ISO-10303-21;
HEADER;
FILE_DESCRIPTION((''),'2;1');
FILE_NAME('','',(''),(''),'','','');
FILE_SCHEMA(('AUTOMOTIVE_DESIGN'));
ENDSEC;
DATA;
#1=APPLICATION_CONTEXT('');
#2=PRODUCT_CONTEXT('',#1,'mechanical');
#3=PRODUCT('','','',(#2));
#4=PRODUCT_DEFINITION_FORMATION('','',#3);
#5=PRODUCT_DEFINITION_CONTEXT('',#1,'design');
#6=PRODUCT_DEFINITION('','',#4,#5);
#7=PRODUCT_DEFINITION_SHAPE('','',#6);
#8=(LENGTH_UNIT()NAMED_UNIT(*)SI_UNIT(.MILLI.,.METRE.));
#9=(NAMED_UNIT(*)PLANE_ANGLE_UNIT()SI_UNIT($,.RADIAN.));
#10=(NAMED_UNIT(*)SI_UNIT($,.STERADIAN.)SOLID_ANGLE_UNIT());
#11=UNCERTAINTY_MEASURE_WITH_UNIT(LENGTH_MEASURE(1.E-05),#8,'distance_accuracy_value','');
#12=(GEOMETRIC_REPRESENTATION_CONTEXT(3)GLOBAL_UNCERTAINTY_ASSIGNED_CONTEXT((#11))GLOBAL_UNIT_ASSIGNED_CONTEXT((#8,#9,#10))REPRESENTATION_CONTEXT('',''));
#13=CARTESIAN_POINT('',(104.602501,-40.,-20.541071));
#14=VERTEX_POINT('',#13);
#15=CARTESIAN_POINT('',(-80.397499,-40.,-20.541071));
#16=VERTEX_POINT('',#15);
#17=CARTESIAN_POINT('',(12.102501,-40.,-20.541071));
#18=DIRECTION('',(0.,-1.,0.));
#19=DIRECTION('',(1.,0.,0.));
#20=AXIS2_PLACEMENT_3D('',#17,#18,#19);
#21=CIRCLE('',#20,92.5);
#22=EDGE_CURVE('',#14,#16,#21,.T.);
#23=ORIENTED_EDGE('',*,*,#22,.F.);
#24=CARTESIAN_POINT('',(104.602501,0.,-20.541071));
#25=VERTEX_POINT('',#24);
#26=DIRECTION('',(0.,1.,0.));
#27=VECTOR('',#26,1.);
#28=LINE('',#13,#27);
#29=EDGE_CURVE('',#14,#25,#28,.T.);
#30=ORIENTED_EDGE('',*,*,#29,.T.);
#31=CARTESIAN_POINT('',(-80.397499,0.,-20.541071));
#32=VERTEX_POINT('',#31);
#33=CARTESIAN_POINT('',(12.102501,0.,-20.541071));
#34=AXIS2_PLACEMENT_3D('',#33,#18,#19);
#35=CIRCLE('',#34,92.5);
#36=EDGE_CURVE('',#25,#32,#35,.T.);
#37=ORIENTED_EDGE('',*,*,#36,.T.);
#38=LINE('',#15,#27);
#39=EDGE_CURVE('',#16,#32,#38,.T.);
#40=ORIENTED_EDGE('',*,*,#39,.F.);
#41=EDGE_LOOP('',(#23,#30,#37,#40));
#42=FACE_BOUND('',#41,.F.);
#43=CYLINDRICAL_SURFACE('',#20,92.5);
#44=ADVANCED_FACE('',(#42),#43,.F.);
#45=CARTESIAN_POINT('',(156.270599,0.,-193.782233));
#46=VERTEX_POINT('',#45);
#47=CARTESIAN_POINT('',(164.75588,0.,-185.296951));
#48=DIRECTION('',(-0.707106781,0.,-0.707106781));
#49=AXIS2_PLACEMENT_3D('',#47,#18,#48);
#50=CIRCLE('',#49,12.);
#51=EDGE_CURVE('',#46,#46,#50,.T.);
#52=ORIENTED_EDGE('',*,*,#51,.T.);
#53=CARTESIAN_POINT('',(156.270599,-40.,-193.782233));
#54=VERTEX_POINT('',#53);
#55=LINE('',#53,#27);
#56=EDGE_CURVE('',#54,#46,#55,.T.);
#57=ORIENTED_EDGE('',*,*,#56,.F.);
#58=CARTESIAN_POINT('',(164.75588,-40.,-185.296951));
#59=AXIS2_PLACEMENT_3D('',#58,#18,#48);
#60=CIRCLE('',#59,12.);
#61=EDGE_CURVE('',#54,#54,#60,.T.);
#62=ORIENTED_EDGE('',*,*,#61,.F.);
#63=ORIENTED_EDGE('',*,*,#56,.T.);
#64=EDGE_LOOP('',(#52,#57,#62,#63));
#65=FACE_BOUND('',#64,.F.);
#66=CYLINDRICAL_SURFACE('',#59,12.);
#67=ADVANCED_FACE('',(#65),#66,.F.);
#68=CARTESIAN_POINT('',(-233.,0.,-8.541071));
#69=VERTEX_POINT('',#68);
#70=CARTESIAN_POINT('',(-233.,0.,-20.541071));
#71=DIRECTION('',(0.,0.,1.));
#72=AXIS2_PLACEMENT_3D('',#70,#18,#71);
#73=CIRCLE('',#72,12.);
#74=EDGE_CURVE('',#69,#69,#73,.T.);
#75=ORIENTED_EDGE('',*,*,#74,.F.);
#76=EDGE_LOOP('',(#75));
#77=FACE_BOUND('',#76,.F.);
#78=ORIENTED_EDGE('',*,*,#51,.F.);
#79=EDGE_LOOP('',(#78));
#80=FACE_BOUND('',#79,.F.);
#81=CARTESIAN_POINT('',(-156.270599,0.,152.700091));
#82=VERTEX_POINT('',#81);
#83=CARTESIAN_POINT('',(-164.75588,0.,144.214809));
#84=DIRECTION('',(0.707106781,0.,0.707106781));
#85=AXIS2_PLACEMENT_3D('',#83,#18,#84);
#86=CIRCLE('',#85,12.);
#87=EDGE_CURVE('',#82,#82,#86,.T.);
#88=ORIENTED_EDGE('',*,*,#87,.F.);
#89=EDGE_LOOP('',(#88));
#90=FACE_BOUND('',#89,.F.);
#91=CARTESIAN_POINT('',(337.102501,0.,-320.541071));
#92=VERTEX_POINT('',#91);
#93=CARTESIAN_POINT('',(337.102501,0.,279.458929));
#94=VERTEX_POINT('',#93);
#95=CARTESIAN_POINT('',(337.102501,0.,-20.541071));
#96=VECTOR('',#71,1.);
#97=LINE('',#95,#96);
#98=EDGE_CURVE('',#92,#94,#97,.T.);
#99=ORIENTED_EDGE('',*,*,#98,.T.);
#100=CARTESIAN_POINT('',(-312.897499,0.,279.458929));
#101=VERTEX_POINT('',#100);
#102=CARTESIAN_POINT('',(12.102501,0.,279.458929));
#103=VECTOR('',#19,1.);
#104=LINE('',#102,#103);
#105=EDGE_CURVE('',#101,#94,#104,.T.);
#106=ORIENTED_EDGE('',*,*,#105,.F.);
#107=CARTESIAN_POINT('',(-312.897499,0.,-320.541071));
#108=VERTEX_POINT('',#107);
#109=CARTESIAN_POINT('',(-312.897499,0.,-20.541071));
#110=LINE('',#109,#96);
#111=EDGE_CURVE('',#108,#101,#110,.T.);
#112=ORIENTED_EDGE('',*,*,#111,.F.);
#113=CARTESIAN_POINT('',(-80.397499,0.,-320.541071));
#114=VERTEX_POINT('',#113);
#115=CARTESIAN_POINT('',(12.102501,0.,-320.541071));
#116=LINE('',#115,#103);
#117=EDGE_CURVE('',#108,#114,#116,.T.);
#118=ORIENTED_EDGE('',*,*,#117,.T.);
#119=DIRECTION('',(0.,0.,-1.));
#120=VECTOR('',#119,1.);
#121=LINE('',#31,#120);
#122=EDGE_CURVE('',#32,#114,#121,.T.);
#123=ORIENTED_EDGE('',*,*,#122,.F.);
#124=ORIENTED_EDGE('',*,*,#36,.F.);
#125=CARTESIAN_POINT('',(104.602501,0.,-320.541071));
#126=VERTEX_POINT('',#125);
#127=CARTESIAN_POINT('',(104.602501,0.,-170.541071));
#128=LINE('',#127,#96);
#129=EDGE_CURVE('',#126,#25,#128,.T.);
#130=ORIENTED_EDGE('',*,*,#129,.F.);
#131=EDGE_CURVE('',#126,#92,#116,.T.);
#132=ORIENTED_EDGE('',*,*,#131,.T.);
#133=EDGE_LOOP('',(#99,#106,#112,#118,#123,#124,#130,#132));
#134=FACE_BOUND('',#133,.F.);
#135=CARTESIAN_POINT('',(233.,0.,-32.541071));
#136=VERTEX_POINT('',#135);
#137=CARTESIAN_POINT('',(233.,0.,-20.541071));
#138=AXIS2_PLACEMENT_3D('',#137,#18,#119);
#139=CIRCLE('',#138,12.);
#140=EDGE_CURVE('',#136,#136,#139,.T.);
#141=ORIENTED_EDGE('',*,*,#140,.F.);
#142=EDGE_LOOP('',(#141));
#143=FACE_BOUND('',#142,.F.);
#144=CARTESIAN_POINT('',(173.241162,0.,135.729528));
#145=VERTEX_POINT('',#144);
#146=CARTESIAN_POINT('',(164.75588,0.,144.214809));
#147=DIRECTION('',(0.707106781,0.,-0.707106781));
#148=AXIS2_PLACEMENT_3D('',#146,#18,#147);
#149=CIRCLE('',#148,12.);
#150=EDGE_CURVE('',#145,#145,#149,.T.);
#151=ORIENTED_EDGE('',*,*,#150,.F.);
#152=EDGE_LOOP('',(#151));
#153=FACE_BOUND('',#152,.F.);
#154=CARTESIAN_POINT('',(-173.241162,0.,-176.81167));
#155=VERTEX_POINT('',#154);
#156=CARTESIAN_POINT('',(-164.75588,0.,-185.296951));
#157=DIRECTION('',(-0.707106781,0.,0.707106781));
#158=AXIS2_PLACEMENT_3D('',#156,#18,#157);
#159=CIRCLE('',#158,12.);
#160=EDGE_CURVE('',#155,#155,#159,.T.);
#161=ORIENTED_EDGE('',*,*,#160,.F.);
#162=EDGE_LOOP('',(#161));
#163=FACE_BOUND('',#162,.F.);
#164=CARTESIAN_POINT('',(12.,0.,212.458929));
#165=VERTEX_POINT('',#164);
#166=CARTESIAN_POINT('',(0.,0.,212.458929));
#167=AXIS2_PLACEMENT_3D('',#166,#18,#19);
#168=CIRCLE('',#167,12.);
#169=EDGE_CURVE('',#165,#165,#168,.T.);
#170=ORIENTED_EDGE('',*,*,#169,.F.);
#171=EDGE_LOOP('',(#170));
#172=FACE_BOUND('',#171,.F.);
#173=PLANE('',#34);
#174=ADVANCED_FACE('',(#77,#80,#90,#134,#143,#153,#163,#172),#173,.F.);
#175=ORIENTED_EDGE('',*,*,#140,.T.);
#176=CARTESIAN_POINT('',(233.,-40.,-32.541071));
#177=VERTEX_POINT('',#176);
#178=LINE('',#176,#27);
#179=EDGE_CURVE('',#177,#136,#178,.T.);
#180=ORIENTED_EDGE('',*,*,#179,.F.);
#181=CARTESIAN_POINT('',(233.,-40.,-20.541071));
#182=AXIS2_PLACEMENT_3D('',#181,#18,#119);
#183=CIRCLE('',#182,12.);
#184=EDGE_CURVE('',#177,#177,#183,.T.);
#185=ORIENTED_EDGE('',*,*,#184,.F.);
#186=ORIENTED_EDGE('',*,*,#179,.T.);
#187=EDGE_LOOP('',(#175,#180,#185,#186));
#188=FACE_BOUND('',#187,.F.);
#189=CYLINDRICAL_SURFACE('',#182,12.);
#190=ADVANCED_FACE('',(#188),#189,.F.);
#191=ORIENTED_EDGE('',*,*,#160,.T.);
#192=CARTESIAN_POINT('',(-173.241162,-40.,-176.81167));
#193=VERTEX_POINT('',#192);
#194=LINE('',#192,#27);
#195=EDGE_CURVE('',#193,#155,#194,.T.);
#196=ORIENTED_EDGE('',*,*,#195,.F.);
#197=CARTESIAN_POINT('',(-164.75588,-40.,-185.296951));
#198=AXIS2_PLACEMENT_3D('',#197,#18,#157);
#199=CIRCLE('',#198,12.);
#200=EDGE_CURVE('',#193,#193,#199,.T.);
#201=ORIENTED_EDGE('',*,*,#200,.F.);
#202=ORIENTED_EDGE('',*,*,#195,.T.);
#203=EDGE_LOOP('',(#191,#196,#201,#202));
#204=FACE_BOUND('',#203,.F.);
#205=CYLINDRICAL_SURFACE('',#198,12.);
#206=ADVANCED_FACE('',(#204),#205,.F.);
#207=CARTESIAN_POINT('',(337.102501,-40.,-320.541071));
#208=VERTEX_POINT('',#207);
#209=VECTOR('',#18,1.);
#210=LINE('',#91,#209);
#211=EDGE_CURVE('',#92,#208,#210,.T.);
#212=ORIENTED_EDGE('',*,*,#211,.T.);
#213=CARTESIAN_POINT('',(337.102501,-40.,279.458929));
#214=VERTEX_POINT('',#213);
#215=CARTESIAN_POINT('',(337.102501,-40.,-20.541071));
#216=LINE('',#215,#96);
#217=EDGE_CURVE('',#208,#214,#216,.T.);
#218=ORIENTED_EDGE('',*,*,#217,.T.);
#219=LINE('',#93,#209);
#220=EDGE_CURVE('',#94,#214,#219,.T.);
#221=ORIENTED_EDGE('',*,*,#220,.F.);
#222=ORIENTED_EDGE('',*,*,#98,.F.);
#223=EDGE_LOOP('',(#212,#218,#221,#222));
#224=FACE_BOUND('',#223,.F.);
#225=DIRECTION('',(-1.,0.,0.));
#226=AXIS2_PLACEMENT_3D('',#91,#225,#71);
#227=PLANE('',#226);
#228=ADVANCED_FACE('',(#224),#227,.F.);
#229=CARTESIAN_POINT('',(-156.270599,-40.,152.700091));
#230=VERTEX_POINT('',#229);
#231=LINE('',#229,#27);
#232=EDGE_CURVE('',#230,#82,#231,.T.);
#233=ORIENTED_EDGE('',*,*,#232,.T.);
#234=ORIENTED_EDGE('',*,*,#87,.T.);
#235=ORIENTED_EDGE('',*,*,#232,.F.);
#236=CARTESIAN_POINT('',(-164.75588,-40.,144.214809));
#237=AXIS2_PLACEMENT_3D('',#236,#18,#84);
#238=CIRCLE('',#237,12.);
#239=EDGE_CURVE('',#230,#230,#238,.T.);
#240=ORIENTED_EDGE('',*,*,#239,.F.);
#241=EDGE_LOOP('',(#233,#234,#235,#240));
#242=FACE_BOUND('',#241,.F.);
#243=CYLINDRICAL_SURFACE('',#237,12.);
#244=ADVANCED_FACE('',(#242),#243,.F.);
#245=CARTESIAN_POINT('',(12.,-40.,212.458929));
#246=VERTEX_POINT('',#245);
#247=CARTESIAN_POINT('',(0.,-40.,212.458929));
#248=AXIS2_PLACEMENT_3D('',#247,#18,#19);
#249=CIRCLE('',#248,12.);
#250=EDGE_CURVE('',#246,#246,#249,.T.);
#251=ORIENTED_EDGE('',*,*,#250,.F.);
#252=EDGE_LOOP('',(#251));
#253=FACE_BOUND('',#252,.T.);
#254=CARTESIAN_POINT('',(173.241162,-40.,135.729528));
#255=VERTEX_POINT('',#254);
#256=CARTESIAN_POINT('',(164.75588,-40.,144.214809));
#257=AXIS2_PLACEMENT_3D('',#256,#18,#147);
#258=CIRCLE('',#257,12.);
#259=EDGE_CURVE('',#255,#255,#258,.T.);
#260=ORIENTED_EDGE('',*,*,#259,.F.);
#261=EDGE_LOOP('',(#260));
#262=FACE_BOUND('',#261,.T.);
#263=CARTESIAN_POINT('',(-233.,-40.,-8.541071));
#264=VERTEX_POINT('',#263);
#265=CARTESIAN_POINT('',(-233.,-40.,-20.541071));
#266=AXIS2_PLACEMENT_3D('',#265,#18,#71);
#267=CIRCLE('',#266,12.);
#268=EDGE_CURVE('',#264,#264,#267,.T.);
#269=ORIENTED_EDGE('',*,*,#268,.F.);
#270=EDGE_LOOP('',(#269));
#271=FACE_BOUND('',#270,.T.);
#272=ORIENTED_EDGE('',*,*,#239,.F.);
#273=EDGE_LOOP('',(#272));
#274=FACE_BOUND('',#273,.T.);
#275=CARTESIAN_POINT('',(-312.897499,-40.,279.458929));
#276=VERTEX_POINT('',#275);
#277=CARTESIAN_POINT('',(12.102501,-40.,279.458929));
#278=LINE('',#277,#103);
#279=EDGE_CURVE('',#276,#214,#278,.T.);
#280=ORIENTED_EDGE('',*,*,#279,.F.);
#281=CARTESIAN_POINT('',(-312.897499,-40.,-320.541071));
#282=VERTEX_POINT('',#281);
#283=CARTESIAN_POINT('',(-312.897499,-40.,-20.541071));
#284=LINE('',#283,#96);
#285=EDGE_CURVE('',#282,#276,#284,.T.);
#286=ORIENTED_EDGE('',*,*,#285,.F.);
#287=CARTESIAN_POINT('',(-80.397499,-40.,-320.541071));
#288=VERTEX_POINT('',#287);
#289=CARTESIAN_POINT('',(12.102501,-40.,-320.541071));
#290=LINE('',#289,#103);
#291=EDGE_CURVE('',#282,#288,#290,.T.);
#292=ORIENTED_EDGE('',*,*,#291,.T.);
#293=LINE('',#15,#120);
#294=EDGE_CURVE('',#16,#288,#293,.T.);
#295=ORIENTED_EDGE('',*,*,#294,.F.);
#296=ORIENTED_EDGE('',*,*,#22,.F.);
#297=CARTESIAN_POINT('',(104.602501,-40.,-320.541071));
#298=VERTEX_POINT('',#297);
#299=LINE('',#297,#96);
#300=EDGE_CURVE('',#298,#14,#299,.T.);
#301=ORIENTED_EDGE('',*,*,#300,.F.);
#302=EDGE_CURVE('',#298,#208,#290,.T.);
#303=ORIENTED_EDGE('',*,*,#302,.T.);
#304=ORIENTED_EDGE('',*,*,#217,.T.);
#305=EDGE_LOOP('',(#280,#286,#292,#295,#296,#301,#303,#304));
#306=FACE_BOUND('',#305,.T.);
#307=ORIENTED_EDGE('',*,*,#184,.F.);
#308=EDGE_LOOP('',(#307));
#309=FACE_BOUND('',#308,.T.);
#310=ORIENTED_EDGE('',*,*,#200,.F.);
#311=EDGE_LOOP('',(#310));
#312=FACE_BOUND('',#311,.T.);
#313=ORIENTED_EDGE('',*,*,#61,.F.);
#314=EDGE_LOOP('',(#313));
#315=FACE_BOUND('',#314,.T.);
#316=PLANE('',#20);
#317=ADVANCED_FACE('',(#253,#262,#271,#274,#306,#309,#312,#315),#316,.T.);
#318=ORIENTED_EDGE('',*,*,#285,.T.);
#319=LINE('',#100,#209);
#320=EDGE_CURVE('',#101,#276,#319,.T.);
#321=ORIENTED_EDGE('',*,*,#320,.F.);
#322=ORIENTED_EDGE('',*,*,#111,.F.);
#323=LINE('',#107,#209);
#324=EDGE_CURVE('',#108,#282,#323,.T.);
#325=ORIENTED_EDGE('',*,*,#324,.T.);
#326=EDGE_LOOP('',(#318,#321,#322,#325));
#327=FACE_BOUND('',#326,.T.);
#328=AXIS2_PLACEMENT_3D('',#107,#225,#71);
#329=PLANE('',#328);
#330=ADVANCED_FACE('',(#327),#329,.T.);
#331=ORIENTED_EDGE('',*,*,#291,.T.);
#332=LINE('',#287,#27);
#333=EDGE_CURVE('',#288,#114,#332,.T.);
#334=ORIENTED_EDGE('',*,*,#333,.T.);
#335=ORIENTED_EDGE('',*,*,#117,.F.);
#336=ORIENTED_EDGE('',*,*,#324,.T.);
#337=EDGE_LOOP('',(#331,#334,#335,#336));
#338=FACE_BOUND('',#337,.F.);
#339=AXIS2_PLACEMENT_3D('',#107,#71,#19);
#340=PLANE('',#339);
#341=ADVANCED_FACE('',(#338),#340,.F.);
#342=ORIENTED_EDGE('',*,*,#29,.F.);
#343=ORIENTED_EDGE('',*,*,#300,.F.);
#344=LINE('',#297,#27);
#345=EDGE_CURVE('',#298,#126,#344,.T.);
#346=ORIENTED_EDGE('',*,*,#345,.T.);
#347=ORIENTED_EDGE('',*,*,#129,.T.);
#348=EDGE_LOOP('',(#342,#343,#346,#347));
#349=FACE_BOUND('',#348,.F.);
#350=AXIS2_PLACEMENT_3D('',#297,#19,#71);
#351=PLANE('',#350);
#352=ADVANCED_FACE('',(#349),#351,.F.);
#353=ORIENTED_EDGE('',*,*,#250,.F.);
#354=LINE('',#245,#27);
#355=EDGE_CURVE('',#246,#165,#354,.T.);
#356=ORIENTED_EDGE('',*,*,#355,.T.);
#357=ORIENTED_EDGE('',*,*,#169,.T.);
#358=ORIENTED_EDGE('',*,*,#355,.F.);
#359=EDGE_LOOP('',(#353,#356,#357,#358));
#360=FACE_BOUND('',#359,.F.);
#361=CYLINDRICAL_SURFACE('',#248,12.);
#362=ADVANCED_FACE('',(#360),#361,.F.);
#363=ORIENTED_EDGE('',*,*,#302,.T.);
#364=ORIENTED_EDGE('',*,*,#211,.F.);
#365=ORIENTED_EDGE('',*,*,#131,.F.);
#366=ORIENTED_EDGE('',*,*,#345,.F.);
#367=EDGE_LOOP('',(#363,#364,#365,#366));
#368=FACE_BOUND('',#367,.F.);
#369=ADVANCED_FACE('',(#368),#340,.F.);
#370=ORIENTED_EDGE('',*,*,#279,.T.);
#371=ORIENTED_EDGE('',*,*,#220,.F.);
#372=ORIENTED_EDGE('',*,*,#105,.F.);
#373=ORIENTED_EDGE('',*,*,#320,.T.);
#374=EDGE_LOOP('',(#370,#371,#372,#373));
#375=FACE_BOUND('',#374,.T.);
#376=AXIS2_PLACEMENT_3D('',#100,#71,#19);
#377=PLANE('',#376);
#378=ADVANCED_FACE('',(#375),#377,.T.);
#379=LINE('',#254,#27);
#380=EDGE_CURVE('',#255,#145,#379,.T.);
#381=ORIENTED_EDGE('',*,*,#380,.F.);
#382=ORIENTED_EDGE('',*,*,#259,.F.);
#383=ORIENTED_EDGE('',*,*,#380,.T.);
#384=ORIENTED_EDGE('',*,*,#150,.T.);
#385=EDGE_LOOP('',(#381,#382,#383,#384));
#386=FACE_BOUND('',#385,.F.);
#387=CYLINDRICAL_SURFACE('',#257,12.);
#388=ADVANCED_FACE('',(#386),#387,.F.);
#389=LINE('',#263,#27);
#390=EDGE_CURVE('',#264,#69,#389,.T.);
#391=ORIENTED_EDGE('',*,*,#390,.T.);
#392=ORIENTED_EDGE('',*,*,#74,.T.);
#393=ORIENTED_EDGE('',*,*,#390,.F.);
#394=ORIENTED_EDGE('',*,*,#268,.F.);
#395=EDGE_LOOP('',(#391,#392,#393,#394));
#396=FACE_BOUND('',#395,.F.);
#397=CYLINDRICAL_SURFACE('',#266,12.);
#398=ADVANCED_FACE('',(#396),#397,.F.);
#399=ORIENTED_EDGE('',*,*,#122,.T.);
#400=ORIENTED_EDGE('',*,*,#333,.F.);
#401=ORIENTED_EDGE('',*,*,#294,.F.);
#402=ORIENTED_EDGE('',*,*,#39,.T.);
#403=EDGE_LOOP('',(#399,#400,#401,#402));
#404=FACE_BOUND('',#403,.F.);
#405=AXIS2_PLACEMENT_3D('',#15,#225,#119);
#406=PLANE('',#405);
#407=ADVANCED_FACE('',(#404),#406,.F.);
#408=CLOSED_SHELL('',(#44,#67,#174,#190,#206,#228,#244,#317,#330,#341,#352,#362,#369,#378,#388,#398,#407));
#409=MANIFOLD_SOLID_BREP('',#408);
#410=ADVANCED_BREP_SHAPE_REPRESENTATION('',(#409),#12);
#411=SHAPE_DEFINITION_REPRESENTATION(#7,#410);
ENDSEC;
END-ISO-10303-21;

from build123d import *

# Parameters (mm, degrees)
F0_W             = 650
F0_H             = 600
F1_DEPTH         = 40
F3_DEPTH         = 40.001
F4_R             = 12
F5_DEPTH         = 40.001
F5_COPIES_COUNT  = 4
F5_COPIES_ANGLE  = 135
F5_COPIES1_COUNT = 4
F5_COPIES1_ANGLE = 135


# Not quite as in the source:
# - a pattern or mirror of a feature is missing from the dataset's text; its kind, count and spacing are read off the source's solid


with BuildPart() as f1:
    # F0 (on Front) → F1 (new body)
    with BuildSketch(Plane.XZ):
        with Locations((12.1025014669, -20.5410706814)):
            Rectangle(F0_W, F0_H)
    extrude(amount=F1_DEPTH)

    # F2 (on face) → F3 (cut, through all)
    with BuildSketch(Plane.XZ.offset(40)):
        with BuildLine():
            Line((-80.3974985331, -20.5410706814), (-80.3974985331, -320.5410706814))
            Line((-80.3974985331, -320.5410706814), (104.6025014669, -320.5410706814))
            Line((104.6025014669, -320.5410706814), (104.6025014669, -20.5410706814))
            ThreePointArc((104.6025014669, -20.5410706814), (12.1025014669, 71.9589293186), (-80.3974985331, -20.5410706814))
        make_face()
    extrude(amount=-F3_DEPTH, mode=Mode.SUBTRACT)

    # F4 (on face) → F5 (cut, through all)
    with BuildSketch(Plane.XZ.offset(40)):
        with Locations((0, 212.4589293186)):
            Circle(F4_R)
    f5 = extrude(amount=-F5_DEPTH, mode=Mode.SUBTRACT)

    # F5_copies: F5 ×4 about axis
    f5_copies_axis = Axis((0, 0, -20.541071), (0, 1, 0))
    for i in range(1, F5_COPIES_COUNT):
        add(f5.rotate(f5_copies_axis, i * F5_COPIES_ANGLE / (F5_COPIES_COUNT - 1)), mode=Mode.SUBTRACT)

    # F5_copies1: F5 ×4 about axis
    f5_copies1_axis = Axis((0, 0, -20.541071), (0, -1, 0))
    for i in range(1, F5_COPIES1_COUNT):
        add(f5.rotate(f5_copies1_axis, i * F5_COPIES1_ANGLE / (F5_COPIES1_COUNT - 1)), mode=Mode.SUBTRACT)


solid = f1.part
